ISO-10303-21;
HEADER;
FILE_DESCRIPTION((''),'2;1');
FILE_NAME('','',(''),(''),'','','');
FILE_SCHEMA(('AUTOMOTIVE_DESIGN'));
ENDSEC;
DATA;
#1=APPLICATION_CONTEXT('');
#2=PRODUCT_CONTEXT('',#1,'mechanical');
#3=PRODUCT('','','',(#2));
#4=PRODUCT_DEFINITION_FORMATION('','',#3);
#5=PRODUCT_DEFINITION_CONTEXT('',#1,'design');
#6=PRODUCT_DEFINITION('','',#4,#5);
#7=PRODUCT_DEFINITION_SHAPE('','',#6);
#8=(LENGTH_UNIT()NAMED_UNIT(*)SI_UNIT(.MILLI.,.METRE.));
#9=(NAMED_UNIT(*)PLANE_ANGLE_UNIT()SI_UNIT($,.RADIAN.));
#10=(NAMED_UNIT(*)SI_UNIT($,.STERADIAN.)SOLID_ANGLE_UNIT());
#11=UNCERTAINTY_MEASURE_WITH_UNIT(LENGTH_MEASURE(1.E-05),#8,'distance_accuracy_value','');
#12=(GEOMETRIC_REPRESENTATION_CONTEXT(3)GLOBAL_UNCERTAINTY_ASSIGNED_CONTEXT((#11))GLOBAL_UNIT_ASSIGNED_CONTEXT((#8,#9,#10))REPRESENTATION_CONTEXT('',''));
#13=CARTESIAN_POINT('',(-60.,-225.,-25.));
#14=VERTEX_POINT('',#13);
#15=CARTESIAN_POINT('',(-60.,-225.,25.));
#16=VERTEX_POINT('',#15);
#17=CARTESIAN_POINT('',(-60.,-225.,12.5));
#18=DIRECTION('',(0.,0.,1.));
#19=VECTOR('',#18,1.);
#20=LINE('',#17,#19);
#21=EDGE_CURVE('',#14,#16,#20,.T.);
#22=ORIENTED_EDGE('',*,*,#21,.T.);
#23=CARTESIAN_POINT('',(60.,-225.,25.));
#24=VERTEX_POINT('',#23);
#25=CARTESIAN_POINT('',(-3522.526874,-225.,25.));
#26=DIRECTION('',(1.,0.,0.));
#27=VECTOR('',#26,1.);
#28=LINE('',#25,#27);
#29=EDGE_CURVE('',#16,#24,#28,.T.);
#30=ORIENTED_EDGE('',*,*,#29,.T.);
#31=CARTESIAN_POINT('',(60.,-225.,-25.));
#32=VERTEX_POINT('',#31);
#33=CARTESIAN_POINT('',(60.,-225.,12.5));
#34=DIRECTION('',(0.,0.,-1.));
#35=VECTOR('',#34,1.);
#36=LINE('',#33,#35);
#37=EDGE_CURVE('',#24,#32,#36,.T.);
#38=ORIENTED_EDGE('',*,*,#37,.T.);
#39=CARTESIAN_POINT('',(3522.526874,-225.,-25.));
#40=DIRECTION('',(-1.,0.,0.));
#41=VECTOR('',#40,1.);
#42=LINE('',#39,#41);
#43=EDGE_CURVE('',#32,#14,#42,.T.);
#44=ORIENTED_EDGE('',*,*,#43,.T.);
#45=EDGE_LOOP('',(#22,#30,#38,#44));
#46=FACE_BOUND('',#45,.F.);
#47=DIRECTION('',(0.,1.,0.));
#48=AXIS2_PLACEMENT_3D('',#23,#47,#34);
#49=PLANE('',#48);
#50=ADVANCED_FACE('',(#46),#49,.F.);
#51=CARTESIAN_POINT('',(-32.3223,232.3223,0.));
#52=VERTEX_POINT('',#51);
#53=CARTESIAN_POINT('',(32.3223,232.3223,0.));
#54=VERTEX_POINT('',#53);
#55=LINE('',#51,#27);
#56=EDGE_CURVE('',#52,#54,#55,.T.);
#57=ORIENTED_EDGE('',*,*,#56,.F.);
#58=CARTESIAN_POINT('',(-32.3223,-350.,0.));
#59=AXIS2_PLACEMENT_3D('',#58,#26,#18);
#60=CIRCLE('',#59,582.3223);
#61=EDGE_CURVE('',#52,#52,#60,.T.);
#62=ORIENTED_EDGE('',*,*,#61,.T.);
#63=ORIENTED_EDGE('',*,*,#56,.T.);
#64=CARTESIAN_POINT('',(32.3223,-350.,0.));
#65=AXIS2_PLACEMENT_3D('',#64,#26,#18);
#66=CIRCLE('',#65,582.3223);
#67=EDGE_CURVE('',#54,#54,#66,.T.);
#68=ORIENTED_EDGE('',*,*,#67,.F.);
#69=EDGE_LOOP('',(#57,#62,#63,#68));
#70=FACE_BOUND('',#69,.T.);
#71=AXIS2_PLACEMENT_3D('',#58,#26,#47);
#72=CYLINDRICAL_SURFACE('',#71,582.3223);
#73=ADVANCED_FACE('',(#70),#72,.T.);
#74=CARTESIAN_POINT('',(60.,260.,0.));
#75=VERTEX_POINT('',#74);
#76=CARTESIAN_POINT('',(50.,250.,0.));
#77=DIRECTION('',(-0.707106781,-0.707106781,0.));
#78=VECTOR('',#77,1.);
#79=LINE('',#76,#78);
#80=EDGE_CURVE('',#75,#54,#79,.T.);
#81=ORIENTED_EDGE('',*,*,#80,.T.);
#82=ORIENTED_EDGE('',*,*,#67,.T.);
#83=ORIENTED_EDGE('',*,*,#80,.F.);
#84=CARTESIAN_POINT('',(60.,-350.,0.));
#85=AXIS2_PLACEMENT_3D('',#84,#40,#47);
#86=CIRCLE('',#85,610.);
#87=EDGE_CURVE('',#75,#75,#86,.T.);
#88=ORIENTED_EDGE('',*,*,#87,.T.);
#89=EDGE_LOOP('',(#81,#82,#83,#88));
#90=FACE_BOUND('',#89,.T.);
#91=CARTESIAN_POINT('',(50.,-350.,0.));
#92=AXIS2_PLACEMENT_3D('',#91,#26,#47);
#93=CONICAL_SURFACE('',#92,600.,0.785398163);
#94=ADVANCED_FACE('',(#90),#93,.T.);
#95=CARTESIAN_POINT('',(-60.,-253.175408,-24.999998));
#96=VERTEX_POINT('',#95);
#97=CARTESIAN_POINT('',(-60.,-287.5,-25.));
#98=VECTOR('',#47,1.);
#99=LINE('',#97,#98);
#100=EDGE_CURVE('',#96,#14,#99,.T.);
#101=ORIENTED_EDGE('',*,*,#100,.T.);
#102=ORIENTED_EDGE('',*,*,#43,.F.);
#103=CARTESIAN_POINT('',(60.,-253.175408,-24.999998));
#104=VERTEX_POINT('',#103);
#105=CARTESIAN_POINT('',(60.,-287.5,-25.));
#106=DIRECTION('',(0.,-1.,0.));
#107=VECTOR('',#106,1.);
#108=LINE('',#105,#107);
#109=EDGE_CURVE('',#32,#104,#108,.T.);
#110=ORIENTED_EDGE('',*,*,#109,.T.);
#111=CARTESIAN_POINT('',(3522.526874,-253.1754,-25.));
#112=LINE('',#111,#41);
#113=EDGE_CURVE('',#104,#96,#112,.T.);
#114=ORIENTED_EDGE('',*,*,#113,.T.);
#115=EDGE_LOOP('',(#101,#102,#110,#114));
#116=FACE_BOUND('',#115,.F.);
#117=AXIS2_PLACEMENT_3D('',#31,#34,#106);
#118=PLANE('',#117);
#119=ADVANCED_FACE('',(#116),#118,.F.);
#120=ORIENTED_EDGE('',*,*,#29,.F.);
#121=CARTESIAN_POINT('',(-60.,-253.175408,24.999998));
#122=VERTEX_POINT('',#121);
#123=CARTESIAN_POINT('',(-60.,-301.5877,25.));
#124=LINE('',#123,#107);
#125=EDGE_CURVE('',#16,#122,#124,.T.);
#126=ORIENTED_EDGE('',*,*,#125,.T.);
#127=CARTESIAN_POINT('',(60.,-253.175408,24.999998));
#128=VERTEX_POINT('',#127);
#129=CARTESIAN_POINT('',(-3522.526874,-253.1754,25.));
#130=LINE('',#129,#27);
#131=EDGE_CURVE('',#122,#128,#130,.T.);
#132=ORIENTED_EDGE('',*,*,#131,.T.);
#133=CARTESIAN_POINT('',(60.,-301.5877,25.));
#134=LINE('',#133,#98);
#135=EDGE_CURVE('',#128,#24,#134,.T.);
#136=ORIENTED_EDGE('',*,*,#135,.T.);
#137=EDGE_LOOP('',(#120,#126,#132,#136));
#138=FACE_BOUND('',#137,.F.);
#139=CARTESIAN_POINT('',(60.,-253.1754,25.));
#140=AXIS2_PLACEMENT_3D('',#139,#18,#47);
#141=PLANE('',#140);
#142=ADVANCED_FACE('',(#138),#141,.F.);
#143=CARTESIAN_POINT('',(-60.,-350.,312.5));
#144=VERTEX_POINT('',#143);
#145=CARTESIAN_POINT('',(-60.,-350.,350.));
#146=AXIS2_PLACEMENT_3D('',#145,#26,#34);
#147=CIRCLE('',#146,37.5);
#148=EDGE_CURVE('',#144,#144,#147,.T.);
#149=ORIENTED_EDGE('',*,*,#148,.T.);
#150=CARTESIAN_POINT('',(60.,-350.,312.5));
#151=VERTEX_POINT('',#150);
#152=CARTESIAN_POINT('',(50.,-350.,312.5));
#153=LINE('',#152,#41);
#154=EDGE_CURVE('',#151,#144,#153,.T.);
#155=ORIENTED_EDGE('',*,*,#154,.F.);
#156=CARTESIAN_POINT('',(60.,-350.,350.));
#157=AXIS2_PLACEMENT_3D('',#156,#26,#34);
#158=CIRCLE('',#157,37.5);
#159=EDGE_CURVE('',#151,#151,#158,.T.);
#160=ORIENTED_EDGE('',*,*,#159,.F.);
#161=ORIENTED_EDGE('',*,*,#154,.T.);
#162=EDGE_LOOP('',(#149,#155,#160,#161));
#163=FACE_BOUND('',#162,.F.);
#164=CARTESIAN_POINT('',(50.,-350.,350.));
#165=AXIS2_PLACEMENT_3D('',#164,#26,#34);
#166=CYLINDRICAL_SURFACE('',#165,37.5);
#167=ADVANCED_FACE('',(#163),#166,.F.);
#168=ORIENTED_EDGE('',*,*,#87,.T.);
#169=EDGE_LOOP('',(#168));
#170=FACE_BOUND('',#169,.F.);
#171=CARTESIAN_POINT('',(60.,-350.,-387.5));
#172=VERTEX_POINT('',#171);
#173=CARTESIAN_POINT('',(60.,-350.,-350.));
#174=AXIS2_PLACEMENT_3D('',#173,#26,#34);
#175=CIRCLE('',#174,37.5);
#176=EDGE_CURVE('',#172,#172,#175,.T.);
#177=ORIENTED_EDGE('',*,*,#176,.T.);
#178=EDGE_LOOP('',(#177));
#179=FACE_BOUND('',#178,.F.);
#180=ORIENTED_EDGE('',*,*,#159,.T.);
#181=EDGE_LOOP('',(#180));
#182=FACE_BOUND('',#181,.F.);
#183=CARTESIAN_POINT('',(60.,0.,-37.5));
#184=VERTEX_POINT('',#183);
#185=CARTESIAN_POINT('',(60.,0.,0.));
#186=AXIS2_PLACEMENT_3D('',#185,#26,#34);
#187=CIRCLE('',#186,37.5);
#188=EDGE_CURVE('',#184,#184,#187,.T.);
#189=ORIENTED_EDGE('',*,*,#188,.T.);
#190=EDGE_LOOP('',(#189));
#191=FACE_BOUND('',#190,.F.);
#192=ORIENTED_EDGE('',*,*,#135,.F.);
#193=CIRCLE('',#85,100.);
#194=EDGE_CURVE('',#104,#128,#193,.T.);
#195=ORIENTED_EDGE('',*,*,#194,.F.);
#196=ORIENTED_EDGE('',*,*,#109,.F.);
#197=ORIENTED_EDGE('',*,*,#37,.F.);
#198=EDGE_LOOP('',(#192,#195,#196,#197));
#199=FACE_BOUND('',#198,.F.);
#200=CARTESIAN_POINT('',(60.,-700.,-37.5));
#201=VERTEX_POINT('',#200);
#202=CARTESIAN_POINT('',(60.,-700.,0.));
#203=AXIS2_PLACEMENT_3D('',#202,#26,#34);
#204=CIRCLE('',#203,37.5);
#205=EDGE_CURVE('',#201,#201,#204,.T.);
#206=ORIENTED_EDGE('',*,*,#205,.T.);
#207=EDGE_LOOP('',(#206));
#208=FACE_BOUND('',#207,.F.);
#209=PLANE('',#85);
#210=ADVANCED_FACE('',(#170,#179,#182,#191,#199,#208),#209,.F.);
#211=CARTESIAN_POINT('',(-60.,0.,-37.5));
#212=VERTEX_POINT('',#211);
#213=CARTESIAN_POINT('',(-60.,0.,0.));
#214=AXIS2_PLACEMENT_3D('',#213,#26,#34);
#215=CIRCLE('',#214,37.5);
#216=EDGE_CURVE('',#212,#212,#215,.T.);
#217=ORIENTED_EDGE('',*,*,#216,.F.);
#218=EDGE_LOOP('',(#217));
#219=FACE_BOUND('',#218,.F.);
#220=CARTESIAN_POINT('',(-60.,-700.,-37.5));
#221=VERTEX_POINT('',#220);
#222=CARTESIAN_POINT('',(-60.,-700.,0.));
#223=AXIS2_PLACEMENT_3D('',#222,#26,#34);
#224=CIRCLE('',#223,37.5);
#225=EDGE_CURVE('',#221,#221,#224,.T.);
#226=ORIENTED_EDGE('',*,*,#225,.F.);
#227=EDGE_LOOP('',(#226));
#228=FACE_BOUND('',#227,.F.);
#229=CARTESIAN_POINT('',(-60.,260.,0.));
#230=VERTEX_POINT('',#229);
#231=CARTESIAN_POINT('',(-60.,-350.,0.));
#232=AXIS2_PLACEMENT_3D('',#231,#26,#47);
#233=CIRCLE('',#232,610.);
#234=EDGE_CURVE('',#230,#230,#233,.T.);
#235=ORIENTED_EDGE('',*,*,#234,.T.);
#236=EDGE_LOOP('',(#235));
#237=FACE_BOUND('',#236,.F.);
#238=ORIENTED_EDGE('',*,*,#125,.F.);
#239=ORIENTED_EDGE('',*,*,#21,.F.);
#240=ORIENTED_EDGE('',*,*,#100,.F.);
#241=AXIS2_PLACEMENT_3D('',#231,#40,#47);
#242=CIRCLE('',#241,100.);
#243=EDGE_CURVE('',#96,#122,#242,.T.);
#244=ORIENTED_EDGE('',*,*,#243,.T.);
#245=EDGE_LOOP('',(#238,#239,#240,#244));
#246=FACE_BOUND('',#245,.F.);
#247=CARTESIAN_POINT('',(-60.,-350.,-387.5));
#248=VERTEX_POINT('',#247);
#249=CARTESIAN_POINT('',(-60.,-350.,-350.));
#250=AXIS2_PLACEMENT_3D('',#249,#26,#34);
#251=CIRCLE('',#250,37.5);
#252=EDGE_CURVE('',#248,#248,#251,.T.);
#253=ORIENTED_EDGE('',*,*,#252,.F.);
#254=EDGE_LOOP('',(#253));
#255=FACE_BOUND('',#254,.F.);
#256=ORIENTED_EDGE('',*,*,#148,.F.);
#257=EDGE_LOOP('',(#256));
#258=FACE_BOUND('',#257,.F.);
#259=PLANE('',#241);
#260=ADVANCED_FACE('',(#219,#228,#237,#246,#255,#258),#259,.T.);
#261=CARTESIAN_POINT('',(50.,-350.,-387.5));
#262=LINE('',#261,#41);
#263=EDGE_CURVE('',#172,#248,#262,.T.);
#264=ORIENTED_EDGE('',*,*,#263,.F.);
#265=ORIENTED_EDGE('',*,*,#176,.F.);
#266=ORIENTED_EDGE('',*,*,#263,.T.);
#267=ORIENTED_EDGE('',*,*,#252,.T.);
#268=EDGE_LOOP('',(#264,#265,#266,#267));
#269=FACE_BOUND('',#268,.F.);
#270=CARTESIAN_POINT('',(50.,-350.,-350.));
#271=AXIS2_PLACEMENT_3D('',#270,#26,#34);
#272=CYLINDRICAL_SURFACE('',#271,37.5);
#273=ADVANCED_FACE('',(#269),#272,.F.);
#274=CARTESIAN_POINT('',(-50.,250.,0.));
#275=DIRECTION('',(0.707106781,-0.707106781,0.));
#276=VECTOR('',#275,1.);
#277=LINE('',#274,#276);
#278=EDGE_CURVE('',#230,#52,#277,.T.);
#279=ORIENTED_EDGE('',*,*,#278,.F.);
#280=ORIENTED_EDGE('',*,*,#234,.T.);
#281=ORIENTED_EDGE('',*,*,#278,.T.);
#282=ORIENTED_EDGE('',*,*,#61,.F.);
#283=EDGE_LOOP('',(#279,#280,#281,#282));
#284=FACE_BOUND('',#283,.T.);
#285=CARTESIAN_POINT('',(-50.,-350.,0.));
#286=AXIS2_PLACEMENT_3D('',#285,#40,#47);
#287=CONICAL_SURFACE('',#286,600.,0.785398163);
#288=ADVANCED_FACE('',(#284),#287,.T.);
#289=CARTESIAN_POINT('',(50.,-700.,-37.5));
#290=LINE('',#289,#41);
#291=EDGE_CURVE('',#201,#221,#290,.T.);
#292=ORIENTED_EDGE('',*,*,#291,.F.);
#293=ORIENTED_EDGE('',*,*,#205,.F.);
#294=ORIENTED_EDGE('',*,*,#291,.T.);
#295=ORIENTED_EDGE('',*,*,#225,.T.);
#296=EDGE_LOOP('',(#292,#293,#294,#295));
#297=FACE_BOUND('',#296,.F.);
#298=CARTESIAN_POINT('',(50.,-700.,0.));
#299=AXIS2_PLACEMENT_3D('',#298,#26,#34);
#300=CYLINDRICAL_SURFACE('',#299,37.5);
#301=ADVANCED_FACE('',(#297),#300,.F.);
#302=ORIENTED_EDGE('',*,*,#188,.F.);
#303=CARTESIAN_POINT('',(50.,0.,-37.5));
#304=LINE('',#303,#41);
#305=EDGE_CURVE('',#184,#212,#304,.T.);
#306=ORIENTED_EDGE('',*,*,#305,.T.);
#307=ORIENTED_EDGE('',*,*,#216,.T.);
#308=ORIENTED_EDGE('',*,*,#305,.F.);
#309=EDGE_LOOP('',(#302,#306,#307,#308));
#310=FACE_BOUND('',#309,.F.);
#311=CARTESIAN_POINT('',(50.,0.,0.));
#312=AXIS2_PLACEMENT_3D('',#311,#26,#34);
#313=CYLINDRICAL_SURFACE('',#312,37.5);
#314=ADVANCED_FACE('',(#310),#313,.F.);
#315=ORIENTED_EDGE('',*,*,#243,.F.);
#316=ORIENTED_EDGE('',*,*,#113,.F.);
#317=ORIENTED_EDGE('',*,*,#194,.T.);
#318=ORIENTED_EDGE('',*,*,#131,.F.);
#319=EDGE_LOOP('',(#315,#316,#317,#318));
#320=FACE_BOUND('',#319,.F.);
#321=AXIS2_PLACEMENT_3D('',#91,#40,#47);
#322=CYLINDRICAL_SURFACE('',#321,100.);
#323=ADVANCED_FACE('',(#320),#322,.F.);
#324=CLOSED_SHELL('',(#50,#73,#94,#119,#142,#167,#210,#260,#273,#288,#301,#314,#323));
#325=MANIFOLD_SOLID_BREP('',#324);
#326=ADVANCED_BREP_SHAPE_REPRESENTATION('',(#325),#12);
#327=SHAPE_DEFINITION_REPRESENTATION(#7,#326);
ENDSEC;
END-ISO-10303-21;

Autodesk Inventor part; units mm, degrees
ref_plane "YZ Plane" through (0, 0, 0) normal (1, 0, 0) x (0, 1, 0)
ref_plane "XZ Plane" through (0, 0, 0) normal (0, 1, 0) x (-1, 0, 0)
ref_plane "XY Plane" through (0, 0, 0) normal (0, 0, 1) x (1, 0, 0)
sketch "Sketch1" plane through (0, 0, 0) normal (0, 0, 1) x (1, 0, 0)
  line L0 (50, 250) -> (50, -250)
  line L1 (50, -250) -> (-50, -250)
  line L2 (-50, -250) -> (-50, 250)
  line L3 (-50, 250) -> (50, -250) construction
  line L4 (50, 250) -> (-50, -250) construction
  line L5 (-50, 250) -> (-32.3223, 232.3223)
  line L6 (50, 250) -> (32.3223, 232.3223)
  line L7 (-32.3223, 232.3223) -> (32.3223, 232.3223)
  line L8 (0, -350) -> (-200, -350)
  point P0 (0, 0)
revolve "Revolution1" add sketch "Sketch1" angle 360 about axis through (0, -350, 0) along (-1, 0, 0)
sketch "Sketch2" plane through (50, -350, 0) normal (1, 0, 0) x (0, 0, -1)
  circle A0 centre (0, 350) radius 37.5
  circle A1 centre (0, 0) radius 350
  circle A2 centre (-350, 0) radius 37.5
  circle A3 centre (0, 0) radius 350
  circle A4 centre (0, -350) radius 37.5
  circle A5 centre (0, 0) radius 350
  circle A6 centre (350, 0) radius 37.5
  circle A7 centre (0, 0) radius 350
  dimension "d12" = 360
extrude "Extrusion1" cut sketch "Sketch2" against normal through all contours A0 A1 | A1 A0 | A2 A1 | A1 A2 | A6 A1 | A1 A6 | A4 A1 | A1 A4
thicken "Thicken1" operation add thickness 10 both sides no extend neighbours yes toward (1, 0, 0) faces at (50, -614.9419, 262.9039)
thicken "Thicken2" operation add thickness 10 both sides no extend neighbours yes toward (-1, 0, 0) faces at (-50, -614.9419, 262.9039)
sketch "Sketch3" plane through (60, -350, 0) normal (1, 0, 0) x (0, 0, -1)
  line L0 (-25, 125) -> (25, 125)
  line L1 (25, 125) -> (25, 96.8246)
  line L2 (-25, 96.8246) -> (-25, 125)
  circle A0 centre (0, 0) radius 100 projected
  line L3 (-25, 125) -> (0, 100) construction
  line L4 (25, 125) -> (0, 100) construction
  circle A1 centre (0, 0) radius 100
  point P0 (0, 350)
extrude "Extrusion2" cut sketch "Sketch3" along normal through all both and the other way through all contours L0 L1 A0 L2
properties part number "polea sesion 2"
